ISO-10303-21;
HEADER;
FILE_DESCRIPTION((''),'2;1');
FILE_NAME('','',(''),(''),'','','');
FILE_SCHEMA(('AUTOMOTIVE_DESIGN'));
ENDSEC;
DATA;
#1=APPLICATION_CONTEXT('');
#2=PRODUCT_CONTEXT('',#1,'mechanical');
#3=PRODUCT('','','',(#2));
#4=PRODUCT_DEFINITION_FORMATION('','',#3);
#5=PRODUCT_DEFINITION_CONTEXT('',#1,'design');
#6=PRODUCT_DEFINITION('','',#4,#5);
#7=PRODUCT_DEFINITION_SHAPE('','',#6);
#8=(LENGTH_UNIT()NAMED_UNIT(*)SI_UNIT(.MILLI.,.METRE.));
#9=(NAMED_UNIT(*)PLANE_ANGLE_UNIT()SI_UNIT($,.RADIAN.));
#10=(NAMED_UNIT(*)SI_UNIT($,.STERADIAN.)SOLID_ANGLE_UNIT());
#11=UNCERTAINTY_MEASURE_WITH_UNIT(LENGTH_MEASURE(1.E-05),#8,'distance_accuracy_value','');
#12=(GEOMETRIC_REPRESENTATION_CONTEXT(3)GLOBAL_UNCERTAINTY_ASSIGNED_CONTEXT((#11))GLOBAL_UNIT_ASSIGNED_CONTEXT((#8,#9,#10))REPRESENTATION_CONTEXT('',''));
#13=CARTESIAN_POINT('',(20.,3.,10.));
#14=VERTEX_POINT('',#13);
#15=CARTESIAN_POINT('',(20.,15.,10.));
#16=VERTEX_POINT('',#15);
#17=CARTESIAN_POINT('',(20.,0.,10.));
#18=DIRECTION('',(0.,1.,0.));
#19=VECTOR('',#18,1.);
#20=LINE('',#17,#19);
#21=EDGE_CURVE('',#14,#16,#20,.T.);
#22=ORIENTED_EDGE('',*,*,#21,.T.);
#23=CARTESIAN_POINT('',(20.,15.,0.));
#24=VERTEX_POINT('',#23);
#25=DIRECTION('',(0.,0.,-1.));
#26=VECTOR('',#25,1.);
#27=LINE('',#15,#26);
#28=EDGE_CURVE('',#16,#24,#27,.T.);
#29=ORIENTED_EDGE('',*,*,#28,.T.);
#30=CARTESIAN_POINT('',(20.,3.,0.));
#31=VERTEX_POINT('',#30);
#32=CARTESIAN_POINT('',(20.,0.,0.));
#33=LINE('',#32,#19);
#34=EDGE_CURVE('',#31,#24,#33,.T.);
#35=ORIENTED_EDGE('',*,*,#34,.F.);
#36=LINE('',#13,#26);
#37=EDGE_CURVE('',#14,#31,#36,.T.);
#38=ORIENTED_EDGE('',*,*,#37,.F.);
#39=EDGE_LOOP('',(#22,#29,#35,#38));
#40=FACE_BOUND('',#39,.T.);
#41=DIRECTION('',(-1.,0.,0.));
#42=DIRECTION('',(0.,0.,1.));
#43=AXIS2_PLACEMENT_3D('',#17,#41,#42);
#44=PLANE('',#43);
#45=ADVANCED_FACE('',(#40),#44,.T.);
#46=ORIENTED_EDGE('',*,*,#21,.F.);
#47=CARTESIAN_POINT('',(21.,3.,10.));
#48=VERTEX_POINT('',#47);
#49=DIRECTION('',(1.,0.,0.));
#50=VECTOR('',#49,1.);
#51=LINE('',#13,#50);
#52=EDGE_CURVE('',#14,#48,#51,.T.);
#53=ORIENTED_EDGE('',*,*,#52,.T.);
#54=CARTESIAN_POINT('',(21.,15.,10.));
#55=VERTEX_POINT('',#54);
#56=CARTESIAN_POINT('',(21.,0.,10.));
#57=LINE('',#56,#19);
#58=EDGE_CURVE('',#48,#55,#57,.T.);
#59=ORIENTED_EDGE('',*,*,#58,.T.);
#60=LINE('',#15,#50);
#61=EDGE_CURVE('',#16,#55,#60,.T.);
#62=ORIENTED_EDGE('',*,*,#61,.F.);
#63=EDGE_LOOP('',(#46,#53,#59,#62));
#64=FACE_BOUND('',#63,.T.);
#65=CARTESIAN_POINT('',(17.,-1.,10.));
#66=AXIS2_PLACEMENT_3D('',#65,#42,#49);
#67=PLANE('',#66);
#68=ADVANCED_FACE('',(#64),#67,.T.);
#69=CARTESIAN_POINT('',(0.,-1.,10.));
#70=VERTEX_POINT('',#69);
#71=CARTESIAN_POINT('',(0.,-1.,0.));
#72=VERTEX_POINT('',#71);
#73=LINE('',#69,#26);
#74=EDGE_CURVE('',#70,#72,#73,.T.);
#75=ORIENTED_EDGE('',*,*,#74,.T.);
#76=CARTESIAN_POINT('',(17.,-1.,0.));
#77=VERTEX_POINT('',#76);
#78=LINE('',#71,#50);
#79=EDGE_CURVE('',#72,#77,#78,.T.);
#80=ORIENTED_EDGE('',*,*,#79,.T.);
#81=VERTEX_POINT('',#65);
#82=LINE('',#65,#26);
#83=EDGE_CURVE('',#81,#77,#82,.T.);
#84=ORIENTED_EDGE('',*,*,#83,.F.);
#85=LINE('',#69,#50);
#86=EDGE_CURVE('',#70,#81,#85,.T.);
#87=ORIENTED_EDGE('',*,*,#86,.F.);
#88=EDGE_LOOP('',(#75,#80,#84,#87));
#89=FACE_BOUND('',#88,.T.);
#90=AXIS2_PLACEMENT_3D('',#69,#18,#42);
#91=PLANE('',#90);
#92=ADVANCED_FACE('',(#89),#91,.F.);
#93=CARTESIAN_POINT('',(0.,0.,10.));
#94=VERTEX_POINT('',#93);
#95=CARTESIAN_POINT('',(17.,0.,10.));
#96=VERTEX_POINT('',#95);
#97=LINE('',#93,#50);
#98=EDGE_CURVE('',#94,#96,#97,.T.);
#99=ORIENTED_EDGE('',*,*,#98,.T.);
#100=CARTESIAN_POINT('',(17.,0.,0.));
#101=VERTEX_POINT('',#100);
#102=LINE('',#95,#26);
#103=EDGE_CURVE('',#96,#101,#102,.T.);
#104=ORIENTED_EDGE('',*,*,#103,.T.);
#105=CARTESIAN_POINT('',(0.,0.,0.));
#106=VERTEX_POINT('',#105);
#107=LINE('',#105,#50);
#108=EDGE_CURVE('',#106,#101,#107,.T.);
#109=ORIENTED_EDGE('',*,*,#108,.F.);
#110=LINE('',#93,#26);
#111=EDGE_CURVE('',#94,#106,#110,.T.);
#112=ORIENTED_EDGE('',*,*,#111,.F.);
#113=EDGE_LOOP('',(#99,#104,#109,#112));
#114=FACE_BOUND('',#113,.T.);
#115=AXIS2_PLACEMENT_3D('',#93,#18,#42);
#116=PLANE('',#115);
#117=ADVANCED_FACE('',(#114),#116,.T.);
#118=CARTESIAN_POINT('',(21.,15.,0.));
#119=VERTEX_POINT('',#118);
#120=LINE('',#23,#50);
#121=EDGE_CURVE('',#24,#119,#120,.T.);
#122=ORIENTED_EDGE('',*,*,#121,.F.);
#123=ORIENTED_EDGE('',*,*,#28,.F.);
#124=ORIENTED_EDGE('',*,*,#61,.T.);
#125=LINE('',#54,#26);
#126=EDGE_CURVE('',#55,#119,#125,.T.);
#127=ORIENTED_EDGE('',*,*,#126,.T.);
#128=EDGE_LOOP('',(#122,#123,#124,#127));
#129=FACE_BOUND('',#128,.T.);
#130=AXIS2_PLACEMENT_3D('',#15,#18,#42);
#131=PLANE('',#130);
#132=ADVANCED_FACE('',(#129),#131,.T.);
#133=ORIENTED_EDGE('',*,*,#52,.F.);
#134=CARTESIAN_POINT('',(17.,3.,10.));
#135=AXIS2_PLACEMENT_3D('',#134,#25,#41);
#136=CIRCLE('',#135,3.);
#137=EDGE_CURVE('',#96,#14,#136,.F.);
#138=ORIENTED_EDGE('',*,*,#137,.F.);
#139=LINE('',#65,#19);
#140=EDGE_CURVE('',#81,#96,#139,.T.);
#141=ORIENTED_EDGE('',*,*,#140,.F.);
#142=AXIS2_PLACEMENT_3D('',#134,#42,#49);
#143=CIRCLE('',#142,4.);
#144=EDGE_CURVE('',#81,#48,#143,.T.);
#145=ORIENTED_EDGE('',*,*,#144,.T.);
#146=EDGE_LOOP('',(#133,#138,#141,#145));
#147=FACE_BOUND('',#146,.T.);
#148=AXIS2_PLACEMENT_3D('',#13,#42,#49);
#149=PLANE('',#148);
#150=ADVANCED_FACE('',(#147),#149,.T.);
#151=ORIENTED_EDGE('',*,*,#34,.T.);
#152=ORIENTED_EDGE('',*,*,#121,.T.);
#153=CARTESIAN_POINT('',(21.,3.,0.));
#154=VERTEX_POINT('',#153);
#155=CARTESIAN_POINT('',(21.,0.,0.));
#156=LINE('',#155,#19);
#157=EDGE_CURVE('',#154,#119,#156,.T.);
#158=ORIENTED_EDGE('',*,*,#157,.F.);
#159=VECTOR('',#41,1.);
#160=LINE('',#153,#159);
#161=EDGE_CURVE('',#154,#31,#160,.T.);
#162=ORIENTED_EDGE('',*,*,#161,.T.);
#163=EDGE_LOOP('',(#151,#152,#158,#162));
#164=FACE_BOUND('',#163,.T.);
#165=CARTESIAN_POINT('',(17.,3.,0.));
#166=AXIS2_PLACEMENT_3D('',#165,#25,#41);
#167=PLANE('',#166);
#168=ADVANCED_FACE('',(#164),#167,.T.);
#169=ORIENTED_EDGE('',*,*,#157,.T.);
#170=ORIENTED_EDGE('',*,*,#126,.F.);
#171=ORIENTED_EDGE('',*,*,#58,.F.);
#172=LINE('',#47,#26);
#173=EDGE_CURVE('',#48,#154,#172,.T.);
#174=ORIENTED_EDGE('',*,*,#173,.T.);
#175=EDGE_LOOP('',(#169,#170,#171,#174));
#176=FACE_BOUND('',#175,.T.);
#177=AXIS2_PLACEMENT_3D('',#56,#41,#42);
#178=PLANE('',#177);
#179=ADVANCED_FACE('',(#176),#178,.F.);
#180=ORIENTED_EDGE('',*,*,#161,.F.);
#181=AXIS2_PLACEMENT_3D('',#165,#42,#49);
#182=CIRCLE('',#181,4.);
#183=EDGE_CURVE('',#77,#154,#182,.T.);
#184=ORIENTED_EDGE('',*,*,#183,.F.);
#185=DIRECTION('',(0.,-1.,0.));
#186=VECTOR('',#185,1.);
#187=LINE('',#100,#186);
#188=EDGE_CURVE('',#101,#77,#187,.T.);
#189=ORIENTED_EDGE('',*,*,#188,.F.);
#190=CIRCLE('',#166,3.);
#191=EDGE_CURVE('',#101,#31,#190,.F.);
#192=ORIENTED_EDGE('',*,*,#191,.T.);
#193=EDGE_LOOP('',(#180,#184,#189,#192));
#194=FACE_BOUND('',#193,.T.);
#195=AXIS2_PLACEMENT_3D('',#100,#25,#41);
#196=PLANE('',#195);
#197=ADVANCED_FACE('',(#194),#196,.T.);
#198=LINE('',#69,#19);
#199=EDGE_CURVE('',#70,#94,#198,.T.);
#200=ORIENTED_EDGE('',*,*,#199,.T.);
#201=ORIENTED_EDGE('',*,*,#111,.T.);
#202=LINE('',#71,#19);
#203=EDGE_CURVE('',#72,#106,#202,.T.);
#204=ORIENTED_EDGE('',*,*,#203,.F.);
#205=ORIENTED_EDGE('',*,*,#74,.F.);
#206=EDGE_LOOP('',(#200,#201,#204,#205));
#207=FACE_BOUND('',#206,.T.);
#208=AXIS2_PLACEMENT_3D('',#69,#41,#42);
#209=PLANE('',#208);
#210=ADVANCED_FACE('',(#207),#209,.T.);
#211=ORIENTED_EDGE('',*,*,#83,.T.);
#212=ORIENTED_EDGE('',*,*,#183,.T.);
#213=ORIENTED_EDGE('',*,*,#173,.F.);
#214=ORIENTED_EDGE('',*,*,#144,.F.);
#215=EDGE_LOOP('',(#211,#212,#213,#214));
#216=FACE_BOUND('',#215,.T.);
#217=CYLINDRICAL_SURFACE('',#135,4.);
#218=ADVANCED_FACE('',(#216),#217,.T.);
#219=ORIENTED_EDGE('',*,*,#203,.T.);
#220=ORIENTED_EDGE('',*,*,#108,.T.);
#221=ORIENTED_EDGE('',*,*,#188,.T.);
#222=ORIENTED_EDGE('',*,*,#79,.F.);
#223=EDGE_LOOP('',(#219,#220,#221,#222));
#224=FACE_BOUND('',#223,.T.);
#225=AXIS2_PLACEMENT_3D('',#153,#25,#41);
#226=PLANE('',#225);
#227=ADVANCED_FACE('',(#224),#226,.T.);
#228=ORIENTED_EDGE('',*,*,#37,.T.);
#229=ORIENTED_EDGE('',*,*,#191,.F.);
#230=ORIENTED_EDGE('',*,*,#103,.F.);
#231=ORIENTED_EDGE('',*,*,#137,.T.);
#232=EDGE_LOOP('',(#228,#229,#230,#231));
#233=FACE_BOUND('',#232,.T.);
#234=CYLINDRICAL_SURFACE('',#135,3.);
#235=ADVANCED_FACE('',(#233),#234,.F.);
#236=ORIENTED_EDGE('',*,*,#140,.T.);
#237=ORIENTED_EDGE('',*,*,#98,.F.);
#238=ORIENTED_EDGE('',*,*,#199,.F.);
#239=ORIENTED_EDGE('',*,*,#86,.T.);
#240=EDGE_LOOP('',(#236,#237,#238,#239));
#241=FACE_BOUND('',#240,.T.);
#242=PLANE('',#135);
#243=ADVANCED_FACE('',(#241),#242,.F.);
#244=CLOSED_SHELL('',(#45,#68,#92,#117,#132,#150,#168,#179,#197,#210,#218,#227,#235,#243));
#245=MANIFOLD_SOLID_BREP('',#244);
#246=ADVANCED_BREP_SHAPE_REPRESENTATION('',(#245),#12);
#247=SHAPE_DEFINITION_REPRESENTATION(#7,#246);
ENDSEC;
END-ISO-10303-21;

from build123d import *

# Parameters (mm, degrees)
SM_BASE_FLANGE_1_DEPTH = 10


# Sheet-metal steps are written as plain solids
with BuildPart() as part:
    # Sketch 1 → 基体-法兰1 (new body)
    with BuildSketch(Plane.XY):
        with BuildLine():
            Line((0, 0), (17, 0))
            ThreePointArc((17, 0), (19.121320344, 0.878679656), (20, 3))
            Line((20, 3), (20, 15))
            Line((20, 15), (21, 15))
            Line((21, 15), (21, 3))
            ThreePointArc((21, 3), (19.828427125, 0.171572875), (17, -1))
            Line((17, -1), (0, -1))
            Line((0, -1), (0, 0))
        make_face()
    extrude(amount=SM_BASE_FLANGE_1_DEPTH)


solid = part.part
